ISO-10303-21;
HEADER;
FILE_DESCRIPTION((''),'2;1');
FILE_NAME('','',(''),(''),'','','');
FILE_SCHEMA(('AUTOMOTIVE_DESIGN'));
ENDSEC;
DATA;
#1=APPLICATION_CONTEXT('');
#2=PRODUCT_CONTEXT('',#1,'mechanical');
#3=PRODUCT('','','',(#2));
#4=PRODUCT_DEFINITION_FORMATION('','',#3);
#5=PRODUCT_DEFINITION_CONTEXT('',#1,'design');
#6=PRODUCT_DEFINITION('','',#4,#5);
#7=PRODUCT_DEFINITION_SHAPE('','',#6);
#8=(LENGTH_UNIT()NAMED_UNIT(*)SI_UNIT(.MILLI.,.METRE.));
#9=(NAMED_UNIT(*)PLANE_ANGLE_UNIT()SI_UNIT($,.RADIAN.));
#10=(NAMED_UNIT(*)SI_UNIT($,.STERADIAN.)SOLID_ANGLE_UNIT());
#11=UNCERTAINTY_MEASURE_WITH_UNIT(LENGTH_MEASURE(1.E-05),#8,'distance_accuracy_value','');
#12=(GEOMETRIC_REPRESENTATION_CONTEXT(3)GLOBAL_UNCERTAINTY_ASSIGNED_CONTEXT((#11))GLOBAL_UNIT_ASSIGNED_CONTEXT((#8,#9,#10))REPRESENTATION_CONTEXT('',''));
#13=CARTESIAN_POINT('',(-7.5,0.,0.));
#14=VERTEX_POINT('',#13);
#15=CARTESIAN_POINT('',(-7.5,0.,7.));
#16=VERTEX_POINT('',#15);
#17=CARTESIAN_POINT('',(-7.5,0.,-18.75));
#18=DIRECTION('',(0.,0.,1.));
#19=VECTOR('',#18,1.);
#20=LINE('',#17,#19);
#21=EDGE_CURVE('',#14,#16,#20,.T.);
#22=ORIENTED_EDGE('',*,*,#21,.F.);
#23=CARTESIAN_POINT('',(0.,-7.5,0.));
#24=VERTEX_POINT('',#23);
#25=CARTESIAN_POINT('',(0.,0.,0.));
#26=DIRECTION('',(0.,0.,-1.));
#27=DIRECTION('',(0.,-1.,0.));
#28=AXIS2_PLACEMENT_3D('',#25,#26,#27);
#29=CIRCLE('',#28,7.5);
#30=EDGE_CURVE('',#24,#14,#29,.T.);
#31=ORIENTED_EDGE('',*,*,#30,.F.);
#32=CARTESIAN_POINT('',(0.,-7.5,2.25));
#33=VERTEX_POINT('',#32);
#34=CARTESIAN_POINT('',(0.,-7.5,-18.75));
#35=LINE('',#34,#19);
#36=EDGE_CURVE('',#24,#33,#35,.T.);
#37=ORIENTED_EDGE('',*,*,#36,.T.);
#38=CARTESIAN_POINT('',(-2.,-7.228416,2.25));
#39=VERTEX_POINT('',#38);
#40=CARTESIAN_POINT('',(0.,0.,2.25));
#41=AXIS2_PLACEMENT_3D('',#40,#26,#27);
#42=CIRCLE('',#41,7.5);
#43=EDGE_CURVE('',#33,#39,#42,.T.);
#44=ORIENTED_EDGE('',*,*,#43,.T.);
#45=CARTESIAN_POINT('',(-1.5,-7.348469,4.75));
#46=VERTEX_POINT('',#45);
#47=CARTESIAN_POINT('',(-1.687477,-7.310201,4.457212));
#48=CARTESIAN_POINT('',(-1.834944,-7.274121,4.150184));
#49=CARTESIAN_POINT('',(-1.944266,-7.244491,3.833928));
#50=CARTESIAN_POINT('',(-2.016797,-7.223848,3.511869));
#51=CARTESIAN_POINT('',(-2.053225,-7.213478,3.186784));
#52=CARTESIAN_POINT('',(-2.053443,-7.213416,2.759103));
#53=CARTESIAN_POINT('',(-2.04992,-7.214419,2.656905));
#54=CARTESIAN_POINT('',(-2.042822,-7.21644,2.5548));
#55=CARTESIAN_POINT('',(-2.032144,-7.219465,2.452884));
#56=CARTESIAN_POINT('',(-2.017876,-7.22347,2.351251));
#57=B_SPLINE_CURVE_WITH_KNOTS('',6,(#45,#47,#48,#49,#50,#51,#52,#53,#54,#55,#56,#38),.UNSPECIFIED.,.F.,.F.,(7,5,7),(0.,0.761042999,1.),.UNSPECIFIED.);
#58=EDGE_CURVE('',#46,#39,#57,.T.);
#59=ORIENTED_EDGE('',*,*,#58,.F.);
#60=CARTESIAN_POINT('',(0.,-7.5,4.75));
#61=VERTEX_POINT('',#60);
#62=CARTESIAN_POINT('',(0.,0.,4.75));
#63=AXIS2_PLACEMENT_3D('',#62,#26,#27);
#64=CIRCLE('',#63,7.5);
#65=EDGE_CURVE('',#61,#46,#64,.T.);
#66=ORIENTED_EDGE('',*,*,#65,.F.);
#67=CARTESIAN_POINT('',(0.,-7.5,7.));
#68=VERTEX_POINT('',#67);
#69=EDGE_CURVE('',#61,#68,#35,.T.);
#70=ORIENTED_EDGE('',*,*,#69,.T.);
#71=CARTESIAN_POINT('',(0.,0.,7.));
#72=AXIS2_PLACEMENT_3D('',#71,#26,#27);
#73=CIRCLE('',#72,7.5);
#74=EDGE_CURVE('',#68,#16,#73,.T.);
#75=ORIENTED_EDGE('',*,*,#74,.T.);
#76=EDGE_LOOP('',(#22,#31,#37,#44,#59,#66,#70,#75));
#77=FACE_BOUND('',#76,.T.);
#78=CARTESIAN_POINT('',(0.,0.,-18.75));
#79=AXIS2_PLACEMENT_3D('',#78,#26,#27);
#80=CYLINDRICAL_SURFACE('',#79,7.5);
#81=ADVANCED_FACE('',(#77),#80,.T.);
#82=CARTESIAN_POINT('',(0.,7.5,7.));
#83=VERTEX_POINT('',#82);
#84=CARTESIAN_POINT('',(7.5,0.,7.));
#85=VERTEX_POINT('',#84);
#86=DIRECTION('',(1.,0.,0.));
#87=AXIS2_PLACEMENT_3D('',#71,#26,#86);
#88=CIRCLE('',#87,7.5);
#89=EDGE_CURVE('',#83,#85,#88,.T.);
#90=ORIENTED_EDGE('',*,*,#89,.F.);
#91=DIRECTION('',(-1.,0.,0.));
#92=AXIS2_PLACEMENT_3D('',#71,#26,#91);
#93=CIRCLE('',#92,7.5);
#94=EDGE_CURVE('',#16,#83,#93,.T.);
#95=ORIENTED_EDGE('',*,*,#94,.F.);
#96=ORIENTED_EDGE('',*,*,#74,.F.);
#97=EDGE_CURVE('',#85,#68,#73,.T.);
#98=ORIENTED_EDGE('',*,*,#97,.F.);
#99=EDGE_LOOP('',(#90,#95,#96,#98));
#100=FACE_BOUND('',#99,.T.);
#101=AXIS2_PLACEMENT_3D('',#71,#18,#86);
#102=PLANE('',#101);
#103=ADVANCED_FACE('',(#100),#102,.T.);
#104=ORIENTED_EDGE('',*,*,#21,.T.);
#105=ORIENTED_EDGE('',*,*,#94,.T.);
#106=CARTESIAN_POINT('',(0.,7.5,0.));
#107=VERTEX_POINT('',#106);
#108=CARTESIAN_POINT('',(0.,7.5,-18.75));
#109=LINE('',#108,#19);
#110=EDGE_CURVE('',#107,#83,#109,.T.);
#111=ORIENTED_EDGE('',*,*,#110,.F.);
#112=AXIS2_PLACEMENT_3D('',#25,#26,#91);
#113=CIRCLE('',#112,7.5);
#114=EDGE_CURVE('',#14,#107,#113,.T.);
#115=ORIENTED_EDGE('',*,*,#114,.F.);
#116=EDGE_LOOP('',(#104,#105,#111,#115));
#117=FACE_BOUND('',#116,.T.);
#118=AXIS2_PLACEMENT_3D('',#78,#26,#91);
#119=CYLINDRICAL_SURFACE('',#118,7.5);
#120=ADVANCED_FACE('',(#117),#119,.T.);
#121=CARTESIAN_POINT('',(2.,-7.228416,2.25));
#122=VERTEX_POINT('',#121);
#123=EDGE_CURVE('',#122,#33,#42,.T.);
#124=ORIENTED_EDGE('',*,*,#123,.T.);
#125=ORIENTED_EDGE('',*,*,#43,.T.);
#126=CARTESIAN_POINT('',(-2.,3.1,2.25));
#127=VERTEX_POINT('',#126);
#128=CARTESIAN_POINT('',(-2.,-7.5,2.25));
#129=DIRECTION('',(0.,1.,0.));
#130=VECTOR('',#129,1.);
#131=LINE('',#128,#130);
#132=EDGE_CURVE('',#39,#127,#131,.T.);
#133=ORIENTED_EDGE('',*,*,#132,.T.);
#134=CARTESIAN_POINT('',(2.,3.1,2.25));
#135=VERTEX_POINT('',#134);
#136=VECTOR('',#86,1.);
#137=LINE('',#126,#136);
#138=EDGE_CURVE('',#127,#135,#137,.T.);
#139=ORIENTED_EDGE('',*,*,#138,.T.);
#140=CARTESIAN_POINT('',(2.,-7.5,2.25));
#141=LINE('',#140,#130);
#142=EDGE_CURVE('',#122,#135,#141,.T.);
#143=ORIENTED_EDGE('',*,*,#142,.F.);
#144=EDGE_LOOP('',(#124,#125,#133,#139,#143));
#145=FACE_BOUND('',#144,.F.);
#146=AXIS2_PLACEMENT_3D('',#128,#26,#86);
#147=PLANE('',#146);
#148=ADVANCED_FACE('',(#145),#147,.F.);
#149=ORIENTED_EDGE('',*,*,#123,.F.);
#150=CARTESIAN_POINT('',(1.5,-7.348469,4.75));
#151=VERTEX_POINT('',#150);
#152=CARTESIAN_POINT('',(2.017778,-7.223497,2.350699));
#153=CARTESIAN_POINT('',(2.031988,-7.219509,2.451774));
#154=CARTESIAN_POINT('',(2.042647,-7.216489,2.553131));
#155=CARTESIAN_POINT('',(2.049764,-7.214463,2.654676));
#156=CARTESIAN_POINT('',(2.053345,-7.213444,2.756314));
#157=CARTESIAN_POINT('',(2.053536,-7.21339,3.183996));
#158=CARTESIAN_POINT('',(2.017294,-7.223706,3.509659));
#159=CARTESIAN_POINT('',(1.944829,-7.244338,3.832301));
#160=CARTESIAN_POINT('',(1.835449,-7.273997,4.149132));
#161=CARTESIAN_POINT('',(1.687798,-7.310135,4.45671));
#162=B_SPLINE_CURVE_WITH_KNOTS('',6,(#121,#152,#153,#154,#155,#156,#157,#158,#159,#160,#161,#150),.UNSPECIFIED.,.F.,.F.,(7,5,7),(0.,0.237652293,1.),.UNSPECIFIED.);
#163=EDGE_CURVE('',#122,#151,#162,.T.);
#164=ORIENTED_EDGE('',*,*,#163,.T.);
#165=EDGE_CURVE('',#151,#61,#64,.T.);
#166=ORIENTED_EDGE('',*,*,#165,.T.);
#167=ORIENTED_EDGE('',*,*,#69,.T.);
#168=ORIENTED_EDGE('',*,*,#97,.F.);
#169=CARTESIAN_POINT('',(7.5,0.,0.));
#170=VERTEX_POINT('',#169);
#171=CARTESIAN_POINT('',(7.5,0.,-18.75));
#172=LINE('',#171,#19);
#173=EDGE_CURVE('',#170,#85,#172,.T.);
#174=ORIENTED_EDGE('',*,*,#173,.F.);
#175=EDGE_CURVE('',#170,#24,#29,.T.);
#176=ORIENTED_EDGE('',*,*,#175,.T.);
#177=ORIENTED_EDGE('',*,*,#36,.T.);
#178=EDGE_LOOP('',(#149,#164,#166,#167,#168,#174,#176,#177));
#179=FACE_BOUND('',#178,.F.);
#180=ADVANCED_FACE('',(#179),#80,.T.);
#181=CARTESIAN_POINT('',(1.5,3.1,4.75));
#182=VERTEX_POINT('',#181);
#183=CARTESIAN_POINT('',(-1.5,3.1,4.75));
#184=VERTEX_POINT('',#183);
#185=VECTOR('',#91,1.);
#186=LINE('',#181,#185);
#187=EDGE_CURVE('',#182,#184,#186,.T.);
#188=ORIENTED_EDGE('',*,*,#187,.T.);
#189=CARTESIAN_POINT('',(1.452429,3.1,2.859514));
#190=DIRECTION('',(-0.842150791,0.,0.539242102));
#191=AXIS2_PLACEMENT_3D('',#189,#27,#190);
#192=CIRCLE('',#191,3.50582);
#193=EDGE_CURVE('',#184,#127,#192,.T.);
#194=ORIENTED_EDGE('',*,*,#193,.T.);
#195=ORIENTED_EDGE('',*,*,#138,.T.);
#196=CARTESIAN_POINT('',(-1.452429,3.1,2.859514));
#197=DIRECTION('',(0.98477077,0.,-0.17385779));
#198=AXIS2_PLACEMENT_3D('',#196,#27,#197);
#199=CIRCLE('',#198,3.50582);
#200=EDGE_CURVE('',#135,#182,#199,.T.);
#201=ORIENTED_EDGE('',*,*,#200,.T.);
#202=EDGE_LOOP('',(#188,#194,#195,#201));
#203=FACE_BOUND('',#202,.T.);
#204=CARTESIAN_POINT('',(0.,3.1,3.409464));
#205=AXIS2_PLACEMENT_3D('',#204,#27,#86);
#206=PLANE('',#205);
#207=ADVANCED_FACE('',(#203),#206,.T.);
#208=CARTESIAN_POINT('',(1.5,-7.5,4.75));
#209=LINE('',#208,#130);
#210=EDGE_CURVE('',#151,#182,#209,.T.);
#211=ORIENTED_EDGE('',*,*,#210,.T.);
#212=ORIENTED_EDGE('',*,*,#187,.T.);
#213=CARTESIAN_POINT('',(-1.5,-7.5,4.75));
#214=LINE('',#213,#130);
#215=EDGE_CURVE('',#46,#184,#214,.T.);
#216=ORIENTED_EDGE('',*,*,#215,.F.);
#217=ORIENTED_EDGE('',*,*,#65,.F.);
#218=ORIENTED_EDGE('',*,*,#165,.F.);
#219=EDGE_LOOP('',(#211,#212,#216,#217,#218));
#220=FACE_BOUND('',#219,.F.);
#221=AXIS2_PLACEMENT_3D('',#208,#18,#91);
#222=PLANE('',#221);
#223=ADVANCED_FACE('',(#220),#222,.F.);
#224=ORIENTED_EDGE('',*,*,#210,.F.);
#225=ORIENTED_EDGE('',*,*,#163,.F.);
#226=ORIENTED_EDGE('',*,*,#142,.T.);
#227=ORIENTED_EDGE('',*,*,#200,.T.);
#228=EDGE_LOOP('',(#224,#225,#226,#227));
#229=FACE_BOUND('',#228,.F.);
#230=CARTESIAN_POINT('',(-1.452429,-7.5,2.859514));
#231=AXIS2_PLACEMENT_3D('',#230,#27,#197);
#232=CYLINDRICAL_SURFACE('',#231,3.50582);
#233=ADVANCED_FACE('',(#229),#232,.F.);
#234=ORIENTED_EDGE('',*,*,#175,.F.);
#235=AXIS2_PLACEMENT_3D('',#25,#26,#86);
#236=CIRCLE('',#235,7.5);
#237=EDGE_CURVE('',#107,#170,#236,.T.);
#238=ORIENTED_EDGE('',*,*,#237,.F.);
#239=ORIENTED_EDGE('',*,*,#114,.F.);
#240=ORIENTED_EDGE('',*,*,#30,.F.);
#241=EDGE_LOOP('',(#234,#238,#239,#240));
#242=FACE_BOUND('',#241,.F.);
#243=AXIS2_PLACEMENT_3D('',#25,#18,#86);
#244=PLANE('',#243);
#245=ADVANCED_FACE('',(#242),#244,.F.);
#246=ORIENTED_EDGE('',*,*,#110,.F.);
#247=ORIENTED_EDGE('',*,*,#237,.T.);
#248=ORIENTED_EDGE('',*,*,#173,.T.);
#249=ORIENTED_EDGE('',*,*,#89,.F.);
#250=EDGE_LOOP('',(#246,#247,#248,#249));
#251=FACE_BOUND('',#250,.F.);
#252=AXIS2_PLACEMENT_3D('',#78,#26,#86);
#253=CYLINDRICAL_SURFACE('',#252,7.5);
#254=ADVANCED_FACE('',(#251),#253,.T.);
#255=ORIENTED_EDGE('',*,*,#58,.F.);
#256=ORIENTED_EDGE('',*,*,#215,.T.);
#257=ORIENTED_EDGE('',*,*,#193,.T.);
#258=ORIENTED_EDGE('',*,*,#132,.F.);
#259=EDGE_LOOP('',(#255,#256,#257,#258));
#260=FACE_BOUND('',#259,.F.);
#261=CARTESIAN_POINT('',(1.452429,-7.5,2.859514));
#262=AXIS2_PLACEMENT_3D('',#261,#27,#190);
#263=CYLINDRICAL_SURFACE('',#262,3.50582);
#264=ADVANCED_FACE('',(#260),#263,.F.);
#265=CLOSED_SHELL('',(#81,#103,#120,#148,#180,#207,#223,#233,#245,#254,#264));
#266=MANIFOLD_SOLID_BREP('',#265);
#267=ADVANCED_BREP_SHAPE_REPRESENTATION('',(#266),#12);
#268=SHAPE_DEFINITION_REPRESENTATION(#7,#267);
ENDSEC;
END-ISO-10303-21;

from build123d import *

# Parameters (mm, degrees)
F0_W        = 15
F0_H        = 15
F1_DEPTH    = 7
F3_DEPTH    = 10.6
F4_T1_DEPTH = 44.5


# Not quite as in the source:
# - a fillet or chamfer that OpenCascade refuses, or shapes differently, is made with other operations: its cross-section is extruded or revolved along the edge and cut away or added


with BuildPart() as f1:
    # F0 (on Top) → F1 (new body)
    with BuildSketch(Plane.XY):
        Rectangle(F0_W, F0_H)
    extrude(amount=F1_DEPTH)

    # F2 (on face) → F3 (cut)
    with BuildSketch(Plane.XZ.offset(7.5)):
        with BuildLine():
            ThreePointArc((2, 2.25), (1.9853102837, 3.5470620567), (1.5, 4.75))
            Line((1.5, 4.75), (-1.5, 4.75))
            ThreePointArc((-1.5, 4.75), (-1.9853102837, 3.5470620567), (-2, 2.25))
            Line((-2, 2.25), (2, 2.25))
        make_face()
    extrude(amount=-F3_DEPTH, mode=Mode.SUBTRACT)

    # F4: fillet of radius 7.5 on 4 edges, made by hand

    # F4_s2 → F4_t1 (cut)
    with BuildSketch(Plane.XY.offset(-18.75)):
        with BuildLine():
            ThreePointArc((0, -7.5), (-5.3033008589, -5.3033008589), (-7.5, 0))
            Line((-7.5, 0), (-7.5, -7.5))
            Line((-7.5, -7.5), (0, -7.5))
        make_face()
        with BuildLine():
            ThreePointArc((0, -7.5), (5.3033008589, -5.3033008589), (7.5, 0))
            Line((7.5, 0), (7.5, -7.5))
            Line((7.5, -7.5), (0, -7.5))
        make_face()
        with BuildLine():
            ThreePointArc((7.5, 0), (5.3033008589, 5.3033008589), (0, 7.5))
            Line((0, 7.5), (7.5, 7.5))
            Line((7.5, 7.5), (7.5, 0))
        make_face()
        with BuildLine():
            ThreePointArc((-7.5, 0), (-5.3033008589, 5.3033008589), (0, 7.5))
            Line((0, 7.5), (-7.5, 7.5))
            Line((-7.5, 7.5), (-7.5, 0))
        make_face()
    extrude(amount=F4_T1_DEPTH, mode=Mode.SUBTRACT)


solid = f1.part
